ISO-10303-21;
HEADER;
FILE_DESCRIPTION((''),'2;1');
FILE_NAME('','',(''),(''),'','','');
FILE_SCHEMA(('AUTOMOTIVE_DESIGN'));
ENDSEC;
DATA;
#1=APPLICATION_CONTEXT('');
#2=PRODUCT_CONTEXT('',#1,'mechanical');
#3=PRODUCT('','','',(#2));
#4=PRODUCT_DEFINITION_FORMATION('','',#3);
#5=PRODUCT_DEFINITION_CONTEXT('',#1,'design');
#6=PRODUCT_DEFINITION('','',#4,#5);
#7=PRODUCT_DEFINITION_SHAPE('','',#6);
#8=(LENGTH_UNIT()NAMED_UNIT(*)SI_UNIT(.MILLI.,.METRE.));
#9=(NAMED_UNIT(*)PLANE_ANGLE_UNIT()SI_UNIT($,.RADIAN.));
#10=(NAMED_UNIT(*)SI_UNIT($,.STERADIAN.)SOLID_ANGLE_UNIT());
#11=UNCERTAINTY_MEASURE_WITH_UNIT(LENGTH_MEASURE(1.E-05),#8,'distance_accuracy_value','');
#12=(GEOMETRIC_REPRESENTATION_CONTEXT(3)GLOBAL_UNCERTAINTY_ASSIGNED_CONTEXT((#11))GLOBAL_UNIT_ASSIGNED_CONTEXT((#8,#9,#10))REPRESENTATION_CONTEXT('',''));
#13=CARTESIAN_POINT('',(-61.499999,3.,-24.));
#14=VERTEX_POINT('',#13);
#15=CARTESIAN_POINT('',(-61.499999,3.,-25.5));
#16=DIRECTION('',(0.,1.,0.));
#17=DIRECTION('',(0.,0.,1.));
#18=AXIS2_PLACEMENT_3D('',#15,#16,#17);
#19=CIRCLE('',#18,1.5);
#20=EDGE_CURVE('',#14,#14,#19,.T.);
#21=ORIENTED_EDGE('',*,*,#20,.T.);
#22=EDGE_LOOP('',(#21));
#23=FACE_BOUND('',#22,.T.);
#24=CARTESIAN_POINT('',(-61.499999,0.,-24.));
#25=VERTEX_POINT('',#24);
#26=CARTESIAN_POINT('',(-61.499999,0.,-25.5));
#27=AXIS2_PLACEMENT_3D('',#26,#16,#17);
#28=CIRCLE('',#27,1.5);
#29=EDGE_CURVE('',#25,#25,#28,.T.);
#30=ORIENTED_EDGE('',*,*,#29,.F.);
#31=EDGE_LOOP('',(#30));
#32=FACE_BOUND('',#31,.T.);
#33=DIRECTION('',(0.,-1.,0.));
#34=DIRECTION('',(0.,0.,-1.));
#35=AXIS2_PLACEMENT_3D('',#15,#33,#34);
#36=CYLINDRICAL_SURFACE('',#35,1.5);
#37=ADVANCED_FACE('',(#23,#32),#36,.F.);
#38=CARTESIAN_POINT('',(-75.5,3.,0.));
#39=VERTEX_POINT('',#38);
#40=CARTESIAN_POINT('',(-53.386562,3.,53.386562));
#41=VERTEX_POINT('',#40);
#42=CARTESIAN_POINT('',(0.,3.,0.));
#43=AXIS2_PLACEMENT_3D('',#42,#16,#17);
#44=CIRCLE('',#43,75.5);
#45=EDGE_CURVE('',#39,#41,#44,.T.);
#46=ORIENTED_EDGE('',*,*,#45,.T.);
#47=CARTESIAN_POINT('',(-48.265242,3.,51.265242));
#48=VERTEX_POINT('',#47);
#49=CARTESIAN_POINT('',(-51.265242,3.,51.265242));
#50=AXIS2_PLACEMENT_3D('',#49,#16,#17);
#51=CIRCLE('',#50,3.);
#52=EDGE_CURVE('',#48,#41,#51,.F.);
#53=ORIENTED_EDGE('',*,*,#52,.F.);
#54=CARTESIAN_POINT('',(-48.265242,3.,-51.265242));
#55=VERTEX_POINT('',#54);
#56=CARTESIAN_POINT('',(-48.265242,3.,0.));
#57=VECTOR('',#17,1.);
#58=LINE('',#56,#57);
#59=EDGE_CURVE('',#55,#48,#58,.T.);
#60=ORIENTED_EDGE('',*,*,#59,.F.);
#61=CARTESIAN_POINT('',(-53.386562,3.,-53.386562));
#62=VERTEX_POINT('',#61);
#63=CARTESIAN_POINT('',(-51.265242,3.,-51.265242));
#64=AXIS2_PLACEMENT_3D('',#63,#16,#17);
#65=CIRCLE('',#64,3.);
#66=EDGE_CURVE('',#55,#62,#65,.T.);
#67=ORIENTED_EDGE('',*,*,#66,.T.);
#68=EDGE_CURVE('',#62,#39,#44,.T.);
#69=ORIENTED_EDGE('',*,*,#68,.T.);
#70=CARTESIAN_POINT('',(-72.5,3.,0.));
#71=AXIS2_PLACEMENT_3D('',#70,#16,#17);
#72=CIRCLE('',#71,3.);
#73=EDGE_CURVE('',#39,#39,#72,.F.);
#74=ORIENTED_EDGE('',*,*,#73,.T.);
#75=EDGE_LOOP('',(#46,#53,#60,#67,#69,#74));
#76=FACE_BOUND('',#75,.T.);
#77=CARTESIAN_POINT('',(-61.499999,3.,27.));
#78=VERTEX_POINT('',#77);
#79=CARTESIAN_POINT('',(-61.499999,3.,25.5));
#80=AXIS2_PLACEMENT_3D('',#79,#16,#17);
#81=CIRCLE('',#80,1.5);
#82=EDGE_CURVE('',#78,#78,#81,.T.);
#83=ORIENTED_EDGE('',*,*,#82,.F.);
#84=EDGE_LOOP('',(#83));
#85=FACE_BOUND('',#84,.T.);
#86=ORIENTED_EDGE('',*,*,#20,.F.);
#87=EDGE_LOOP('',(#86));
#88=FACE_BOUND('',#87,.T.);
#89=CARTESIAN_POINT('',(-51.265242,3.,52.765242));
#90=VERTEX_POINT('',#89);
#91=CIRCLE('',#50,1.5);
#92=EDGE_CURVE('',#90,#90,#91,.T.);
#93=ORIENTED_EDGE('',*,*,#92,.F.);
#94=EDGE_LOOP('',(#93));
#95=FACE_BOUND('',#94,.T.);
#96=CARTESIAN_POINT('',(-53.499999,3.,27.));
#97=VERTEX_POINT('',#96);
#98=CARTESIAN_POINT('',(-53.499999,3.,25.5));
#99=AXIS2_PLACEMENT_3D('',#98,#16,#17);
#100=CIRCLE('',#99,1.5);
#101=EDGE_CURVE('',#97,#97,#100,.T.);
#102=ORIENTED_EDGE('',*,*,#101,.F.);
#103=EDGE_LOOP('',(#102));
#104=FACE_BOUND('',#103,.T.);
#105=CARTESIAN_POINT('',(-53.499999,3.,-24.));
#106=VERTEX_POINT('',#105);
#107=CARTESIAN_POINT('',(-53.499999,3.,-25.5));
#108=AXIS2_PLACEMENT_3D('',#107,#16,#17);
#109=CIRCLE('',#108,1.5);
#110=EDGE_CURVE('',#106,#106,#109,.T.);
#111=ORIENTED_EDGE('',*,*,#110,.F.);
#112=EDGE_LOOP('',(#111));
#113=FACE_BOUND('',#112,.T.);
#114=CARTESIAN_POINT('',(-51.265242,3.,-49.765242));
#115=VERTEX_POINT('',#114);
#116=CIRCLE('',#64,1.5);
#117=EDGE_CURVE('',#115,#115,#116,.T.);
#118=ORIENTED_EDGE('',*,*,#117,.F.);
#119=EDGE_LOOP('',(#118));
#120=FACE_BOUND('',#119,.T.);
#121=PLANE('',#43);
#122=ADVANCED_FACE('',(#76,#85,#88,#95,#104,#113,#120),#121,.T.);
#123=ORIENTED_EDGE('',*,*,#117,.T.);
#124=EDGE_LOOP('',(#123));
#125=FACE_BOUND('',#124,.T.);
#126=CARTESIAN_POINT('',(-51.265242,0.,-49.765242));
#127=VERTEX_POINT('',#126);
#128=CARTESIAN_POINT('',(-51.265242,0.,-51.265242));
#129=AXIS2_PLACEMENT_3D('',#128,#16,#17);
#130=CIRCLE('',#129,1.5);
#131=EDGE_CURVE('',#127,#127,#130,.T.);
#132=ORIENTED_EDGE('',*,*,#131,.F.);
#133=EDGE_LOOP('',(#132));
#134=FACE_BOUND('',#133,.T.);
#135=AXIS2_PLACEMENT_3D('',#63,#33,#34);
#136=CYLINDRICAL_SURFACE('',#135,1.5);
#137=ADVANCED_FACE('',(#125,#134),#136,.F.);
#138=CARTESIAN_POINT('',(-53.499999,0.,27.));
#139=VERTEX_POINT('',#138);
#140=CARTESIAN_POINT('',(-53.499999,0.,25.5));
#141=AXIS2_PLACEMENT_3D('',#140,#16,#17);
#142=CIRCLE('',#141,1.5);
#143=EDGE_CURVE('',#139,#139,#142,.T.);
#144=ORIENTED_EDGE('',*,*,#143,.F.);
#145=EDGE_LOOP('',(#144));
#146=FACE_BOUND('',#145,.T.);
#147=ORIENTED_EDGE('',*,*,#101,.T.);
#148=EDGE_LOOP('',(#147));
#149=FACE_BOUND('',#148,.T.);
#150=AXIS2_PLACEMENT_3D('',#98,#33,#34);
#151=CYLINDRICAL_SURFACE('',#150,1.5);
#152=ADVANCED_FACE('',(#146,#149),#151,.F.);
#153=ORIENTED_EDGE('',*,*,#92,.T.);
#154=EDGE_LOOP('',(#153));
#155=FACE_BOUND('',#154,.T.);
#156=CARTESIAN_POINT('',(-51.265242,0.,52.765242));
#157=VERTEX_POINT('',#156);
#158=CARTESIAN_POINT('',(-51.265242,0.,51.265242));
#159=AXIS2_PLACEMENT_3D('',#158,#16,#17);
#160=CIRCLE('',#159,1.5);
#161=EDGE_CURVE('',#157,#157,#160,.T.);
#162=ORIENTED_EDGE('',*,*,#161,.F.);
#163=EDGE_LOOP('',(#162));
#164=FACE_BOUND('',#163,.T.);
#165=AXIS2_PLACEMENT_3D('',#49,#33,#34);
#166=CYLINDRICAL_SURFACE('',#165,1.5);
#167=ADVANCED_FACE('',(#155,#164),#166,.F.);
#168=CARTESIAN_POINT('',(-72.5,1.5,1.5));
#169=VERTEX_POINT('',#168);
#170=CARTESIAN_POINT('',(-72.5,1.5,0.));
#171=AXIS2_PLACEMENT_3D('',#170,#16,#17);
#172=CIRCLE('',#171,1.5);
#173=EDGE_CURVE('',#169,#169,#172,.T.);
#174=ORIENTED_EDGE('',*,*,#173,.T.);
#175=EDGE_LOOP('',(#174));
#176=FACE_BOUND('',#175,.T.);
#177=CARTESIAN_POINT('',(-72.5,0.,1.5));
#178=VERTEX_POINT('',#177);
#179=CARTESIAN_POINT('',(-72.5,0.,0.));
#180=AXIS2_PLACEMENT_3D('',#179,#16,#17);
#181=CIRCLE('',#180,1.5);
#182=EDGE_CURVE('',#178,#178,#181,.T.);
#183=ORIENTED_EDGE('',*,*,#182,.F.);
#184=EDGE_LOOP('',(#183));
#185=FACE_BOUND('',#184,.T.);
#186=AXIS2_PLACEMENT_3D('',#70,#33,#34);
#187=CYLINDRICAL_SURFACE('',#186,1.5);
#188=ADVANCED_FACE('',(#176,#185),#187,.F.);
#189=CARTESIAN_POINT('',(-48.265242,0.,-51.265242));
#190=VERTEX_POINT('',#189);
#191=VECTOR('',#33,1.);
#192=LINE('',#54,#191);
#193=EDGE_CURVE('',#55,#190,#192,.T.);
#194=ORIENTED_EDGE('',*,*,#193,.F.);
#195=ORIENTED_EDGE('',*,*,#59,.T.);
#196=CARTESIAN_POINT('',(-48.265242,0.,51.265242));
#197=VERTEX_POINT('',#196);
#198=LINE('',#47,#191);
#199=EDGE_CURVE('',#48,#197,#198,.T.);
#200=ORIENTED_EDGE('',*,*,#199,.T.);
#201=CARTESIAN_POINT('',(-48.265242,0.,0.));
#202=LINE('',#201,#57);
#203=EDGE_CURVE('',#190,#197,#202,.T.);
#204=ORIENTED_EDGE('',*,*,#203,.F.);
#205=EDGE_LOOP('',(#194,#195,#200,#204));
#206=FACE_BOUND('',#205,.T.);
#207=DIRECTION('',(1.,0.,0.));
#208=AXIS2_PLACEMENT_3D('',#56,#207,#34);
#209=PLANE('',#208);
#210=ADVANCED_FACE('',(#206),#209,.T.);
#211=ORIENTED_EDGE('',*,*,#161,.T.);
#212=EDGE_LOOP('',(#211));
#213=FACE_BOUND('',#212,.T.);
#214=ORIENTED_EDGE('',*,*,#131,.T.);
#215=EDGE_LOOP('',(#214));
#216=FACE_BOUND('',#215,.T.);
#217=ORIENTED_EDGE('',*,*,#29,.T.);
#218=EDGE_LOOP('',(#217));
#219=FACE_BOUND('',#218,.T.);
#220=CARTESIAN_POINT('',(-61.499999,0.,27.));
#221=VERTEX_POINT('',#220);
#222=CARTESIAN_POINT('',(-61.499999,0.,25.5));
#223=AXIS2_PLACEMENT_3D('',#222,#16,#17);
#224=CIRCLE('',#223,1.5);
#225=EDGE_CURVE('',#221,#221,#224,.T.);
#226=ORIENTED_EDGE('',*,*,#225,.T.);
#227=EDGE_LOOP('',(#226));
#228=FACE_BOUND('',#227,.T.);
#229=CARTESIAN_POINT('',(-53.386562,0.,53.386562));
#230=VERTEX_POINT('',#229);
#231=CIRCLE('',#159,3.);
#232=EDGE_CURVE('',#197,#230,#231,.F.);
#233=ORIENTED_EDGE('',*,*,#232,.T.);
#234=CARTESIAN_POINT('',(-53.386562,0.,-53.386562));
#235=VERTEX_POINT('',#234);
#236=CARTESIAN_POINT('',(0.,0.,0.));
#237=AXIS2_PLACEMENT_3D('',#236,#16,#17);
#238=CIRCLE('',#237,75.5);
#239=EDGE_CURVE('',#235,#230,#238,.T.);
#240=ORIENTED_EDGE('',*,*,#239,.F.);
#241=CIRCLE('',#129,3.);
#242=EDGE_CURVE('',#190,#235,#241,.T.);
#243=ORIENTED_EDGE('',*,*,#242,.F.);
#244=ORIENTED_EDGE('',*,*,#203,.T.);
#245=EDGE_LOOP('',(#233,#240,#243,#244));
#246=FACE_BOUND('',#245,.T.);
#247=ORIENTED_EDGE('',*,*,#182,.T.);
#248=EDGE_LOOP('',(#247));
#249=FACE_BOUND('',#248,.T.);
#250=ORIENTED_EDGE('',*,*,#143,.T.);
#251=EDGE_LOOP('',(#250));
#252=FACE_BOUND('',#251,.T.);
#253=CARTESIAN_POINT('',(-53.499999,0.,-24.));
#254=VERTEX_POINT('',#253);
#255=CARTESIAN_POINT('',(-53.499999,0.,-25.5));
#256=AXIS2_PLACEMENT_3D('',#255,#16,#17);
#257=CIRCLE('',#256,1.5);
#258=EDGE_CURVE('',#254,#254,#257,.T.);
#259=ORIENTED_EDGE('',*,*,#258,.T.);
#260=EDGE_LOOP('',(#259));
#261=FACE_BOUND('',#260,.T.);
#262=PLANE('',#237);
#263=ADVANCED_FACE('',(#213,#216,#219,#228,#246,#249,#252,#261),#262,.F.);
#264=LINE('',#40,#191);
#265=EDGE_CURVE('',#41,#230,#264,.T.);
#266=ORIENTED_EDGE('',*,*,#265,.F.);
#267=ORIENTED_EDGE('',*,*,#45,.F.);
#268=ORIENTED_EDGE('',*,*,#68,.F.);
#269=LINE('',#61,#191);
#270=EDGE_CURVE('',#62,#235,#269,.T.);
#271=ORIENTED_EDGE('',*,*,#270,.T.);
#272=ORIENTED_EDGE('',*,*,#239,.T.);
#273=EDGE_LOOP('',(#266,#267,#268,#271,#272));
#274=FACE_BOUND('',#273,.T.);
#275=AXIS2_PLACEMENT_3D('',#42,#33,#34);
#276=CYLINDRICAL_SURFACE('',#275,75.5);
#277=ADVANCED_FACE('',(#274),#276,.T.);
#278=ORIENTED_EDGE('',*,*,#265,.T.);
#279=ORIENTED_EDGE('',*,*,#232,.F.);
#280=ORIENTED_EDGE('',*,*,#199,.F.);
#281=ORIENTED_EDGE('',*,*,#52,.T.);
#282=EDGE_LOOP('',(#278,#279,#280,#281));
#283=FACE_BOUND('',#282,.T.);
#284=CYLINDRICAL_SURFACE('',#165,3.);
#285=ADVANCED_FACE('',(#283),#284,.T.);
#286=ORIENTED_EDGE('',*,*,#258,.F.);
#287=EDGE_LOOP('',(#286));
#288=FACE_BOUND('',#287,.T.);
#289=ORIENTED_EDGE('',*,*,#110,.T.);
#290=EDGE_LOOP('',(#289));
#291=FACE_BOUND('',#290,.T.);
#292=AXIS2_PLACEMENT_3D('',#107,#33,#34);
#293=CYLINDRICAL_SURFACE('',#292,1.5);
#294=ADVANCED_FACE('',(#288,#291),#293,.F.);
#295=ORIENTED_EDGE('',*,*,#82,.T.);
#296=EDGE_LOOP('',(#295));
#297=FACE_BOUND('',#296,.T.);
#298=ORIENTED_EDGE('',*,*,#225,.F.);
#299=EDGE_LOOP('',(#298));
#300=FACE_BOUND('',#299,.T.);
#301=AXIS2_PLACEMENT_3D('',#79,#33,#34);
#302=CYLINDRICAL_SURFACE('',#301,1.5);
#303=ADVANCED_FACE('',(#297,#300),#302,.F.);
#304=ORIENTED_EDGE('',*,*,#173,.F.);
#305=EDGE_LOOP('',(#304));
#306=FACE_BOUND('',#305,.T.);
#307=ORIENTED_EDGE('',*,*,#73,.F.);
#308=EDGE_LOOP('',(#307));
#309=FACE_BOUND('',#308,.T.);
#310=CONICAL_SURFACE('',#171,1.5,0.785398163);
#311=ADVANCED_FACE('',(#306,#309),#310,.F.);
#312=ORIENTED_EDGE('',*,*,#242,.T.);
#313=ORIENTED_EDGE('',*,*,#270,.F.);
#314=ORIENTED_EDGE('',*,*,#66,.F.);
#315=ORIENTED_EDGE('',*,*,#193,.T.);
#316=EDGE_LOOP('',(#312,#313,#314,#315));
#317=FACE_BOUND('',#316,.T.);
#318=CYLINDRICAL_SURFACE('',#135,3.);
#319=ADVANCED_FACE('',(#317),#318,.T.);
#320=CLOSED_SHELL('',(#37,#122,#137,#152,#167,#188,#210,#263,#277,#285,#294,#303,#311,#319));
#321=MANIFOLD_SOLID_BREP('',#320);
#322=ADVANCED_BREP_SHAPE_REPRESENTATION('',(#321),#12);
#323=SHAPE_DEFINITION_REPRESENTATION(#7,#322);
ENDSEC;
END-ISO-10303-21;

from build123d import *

# Parameters (mm, degrees)
SKETCH_1_R      = 1.5
EXTRUDE_1_DEPTH = 3
CHAMFER_1_SIZE  = 1.5


with BuildPart() as part:
    # 草图1 → 凸台-拉伸1 (new body)
    with BuildSketch(Plane(origin=(0, 0, 0), x_dir=(1, 0, 0), z_dir=(0, 1, 0))):
        with BuildLine():
            Line((-48.265241636, 51.265241636), (-48.265241636, -51.265241636))
            ThreePointArc((-48.265241636, -51.265241636), (-50.117191339, -54.036880234), (-53.38656198, -53.38656198))
            ThreePointArc((-53.38656198, -53.38656198), (-75.5, 0), (-53.38656198, 53.38656198))
            ThreePointArc((-53.38656198, 53.38656198), (-50.117191339, 54.036880234), (-48.265241636, 51.265241636))
        make_face()
        with Locations(Location((-51.265241636, -51.265241636, 0), (0, 0, 270))):
            Circle(SKETCH_1_R, mode=Mode.SUBTRACT)
        with Locations(Location((-72.5, 0, 0), (0, 0, 270))):
            Circle(SKETCH_1_R, mode=Mode.SUBTRACT)
        with Locations(Location((-51.265241636, 51.265241636, 0), (0, 0, 270))):
            Circle(SKETCH_1_R, mode=Mode.SUBTRACT)
        with Locations(Location((-61.499999084, -25.5, 0), (0, 0, 270))):
            Circle(SKETCH_1_R, mode=Mode.SUBTRACT)
        with Locations(Location((-53.499999084, -25.5, 0), (0, 0, 270))):
            Circle(SKETCH_1_R, mode=Mode.SUBTRACT)
        with Locations(Location((-61.499999084, 25.5, 0), (0, 0, 270))):
            Circle(SKETCH_1_R, mode=Mode.SUBTRACT)
        with Locations(Location((-53.499999084, 25.5, 0), (0, 0, 270))):
            Circle(SKETCH_1_R, mode=Mode.SUBTRACT)
    extrude(amount=EXTRUDE_1_DEPTH)

    # 倒角1
    chamfer_1_edges = [part.edges().sort_by_distance(p)[0] for p in [
        (-72.5, 3, -1.5),
    ]]
    chamfer(chamfer_1_edges, length=CHAMFER_1_SIZE - 0.0001)  # a hair under: the kernel refuses the full size


solid = part.part
